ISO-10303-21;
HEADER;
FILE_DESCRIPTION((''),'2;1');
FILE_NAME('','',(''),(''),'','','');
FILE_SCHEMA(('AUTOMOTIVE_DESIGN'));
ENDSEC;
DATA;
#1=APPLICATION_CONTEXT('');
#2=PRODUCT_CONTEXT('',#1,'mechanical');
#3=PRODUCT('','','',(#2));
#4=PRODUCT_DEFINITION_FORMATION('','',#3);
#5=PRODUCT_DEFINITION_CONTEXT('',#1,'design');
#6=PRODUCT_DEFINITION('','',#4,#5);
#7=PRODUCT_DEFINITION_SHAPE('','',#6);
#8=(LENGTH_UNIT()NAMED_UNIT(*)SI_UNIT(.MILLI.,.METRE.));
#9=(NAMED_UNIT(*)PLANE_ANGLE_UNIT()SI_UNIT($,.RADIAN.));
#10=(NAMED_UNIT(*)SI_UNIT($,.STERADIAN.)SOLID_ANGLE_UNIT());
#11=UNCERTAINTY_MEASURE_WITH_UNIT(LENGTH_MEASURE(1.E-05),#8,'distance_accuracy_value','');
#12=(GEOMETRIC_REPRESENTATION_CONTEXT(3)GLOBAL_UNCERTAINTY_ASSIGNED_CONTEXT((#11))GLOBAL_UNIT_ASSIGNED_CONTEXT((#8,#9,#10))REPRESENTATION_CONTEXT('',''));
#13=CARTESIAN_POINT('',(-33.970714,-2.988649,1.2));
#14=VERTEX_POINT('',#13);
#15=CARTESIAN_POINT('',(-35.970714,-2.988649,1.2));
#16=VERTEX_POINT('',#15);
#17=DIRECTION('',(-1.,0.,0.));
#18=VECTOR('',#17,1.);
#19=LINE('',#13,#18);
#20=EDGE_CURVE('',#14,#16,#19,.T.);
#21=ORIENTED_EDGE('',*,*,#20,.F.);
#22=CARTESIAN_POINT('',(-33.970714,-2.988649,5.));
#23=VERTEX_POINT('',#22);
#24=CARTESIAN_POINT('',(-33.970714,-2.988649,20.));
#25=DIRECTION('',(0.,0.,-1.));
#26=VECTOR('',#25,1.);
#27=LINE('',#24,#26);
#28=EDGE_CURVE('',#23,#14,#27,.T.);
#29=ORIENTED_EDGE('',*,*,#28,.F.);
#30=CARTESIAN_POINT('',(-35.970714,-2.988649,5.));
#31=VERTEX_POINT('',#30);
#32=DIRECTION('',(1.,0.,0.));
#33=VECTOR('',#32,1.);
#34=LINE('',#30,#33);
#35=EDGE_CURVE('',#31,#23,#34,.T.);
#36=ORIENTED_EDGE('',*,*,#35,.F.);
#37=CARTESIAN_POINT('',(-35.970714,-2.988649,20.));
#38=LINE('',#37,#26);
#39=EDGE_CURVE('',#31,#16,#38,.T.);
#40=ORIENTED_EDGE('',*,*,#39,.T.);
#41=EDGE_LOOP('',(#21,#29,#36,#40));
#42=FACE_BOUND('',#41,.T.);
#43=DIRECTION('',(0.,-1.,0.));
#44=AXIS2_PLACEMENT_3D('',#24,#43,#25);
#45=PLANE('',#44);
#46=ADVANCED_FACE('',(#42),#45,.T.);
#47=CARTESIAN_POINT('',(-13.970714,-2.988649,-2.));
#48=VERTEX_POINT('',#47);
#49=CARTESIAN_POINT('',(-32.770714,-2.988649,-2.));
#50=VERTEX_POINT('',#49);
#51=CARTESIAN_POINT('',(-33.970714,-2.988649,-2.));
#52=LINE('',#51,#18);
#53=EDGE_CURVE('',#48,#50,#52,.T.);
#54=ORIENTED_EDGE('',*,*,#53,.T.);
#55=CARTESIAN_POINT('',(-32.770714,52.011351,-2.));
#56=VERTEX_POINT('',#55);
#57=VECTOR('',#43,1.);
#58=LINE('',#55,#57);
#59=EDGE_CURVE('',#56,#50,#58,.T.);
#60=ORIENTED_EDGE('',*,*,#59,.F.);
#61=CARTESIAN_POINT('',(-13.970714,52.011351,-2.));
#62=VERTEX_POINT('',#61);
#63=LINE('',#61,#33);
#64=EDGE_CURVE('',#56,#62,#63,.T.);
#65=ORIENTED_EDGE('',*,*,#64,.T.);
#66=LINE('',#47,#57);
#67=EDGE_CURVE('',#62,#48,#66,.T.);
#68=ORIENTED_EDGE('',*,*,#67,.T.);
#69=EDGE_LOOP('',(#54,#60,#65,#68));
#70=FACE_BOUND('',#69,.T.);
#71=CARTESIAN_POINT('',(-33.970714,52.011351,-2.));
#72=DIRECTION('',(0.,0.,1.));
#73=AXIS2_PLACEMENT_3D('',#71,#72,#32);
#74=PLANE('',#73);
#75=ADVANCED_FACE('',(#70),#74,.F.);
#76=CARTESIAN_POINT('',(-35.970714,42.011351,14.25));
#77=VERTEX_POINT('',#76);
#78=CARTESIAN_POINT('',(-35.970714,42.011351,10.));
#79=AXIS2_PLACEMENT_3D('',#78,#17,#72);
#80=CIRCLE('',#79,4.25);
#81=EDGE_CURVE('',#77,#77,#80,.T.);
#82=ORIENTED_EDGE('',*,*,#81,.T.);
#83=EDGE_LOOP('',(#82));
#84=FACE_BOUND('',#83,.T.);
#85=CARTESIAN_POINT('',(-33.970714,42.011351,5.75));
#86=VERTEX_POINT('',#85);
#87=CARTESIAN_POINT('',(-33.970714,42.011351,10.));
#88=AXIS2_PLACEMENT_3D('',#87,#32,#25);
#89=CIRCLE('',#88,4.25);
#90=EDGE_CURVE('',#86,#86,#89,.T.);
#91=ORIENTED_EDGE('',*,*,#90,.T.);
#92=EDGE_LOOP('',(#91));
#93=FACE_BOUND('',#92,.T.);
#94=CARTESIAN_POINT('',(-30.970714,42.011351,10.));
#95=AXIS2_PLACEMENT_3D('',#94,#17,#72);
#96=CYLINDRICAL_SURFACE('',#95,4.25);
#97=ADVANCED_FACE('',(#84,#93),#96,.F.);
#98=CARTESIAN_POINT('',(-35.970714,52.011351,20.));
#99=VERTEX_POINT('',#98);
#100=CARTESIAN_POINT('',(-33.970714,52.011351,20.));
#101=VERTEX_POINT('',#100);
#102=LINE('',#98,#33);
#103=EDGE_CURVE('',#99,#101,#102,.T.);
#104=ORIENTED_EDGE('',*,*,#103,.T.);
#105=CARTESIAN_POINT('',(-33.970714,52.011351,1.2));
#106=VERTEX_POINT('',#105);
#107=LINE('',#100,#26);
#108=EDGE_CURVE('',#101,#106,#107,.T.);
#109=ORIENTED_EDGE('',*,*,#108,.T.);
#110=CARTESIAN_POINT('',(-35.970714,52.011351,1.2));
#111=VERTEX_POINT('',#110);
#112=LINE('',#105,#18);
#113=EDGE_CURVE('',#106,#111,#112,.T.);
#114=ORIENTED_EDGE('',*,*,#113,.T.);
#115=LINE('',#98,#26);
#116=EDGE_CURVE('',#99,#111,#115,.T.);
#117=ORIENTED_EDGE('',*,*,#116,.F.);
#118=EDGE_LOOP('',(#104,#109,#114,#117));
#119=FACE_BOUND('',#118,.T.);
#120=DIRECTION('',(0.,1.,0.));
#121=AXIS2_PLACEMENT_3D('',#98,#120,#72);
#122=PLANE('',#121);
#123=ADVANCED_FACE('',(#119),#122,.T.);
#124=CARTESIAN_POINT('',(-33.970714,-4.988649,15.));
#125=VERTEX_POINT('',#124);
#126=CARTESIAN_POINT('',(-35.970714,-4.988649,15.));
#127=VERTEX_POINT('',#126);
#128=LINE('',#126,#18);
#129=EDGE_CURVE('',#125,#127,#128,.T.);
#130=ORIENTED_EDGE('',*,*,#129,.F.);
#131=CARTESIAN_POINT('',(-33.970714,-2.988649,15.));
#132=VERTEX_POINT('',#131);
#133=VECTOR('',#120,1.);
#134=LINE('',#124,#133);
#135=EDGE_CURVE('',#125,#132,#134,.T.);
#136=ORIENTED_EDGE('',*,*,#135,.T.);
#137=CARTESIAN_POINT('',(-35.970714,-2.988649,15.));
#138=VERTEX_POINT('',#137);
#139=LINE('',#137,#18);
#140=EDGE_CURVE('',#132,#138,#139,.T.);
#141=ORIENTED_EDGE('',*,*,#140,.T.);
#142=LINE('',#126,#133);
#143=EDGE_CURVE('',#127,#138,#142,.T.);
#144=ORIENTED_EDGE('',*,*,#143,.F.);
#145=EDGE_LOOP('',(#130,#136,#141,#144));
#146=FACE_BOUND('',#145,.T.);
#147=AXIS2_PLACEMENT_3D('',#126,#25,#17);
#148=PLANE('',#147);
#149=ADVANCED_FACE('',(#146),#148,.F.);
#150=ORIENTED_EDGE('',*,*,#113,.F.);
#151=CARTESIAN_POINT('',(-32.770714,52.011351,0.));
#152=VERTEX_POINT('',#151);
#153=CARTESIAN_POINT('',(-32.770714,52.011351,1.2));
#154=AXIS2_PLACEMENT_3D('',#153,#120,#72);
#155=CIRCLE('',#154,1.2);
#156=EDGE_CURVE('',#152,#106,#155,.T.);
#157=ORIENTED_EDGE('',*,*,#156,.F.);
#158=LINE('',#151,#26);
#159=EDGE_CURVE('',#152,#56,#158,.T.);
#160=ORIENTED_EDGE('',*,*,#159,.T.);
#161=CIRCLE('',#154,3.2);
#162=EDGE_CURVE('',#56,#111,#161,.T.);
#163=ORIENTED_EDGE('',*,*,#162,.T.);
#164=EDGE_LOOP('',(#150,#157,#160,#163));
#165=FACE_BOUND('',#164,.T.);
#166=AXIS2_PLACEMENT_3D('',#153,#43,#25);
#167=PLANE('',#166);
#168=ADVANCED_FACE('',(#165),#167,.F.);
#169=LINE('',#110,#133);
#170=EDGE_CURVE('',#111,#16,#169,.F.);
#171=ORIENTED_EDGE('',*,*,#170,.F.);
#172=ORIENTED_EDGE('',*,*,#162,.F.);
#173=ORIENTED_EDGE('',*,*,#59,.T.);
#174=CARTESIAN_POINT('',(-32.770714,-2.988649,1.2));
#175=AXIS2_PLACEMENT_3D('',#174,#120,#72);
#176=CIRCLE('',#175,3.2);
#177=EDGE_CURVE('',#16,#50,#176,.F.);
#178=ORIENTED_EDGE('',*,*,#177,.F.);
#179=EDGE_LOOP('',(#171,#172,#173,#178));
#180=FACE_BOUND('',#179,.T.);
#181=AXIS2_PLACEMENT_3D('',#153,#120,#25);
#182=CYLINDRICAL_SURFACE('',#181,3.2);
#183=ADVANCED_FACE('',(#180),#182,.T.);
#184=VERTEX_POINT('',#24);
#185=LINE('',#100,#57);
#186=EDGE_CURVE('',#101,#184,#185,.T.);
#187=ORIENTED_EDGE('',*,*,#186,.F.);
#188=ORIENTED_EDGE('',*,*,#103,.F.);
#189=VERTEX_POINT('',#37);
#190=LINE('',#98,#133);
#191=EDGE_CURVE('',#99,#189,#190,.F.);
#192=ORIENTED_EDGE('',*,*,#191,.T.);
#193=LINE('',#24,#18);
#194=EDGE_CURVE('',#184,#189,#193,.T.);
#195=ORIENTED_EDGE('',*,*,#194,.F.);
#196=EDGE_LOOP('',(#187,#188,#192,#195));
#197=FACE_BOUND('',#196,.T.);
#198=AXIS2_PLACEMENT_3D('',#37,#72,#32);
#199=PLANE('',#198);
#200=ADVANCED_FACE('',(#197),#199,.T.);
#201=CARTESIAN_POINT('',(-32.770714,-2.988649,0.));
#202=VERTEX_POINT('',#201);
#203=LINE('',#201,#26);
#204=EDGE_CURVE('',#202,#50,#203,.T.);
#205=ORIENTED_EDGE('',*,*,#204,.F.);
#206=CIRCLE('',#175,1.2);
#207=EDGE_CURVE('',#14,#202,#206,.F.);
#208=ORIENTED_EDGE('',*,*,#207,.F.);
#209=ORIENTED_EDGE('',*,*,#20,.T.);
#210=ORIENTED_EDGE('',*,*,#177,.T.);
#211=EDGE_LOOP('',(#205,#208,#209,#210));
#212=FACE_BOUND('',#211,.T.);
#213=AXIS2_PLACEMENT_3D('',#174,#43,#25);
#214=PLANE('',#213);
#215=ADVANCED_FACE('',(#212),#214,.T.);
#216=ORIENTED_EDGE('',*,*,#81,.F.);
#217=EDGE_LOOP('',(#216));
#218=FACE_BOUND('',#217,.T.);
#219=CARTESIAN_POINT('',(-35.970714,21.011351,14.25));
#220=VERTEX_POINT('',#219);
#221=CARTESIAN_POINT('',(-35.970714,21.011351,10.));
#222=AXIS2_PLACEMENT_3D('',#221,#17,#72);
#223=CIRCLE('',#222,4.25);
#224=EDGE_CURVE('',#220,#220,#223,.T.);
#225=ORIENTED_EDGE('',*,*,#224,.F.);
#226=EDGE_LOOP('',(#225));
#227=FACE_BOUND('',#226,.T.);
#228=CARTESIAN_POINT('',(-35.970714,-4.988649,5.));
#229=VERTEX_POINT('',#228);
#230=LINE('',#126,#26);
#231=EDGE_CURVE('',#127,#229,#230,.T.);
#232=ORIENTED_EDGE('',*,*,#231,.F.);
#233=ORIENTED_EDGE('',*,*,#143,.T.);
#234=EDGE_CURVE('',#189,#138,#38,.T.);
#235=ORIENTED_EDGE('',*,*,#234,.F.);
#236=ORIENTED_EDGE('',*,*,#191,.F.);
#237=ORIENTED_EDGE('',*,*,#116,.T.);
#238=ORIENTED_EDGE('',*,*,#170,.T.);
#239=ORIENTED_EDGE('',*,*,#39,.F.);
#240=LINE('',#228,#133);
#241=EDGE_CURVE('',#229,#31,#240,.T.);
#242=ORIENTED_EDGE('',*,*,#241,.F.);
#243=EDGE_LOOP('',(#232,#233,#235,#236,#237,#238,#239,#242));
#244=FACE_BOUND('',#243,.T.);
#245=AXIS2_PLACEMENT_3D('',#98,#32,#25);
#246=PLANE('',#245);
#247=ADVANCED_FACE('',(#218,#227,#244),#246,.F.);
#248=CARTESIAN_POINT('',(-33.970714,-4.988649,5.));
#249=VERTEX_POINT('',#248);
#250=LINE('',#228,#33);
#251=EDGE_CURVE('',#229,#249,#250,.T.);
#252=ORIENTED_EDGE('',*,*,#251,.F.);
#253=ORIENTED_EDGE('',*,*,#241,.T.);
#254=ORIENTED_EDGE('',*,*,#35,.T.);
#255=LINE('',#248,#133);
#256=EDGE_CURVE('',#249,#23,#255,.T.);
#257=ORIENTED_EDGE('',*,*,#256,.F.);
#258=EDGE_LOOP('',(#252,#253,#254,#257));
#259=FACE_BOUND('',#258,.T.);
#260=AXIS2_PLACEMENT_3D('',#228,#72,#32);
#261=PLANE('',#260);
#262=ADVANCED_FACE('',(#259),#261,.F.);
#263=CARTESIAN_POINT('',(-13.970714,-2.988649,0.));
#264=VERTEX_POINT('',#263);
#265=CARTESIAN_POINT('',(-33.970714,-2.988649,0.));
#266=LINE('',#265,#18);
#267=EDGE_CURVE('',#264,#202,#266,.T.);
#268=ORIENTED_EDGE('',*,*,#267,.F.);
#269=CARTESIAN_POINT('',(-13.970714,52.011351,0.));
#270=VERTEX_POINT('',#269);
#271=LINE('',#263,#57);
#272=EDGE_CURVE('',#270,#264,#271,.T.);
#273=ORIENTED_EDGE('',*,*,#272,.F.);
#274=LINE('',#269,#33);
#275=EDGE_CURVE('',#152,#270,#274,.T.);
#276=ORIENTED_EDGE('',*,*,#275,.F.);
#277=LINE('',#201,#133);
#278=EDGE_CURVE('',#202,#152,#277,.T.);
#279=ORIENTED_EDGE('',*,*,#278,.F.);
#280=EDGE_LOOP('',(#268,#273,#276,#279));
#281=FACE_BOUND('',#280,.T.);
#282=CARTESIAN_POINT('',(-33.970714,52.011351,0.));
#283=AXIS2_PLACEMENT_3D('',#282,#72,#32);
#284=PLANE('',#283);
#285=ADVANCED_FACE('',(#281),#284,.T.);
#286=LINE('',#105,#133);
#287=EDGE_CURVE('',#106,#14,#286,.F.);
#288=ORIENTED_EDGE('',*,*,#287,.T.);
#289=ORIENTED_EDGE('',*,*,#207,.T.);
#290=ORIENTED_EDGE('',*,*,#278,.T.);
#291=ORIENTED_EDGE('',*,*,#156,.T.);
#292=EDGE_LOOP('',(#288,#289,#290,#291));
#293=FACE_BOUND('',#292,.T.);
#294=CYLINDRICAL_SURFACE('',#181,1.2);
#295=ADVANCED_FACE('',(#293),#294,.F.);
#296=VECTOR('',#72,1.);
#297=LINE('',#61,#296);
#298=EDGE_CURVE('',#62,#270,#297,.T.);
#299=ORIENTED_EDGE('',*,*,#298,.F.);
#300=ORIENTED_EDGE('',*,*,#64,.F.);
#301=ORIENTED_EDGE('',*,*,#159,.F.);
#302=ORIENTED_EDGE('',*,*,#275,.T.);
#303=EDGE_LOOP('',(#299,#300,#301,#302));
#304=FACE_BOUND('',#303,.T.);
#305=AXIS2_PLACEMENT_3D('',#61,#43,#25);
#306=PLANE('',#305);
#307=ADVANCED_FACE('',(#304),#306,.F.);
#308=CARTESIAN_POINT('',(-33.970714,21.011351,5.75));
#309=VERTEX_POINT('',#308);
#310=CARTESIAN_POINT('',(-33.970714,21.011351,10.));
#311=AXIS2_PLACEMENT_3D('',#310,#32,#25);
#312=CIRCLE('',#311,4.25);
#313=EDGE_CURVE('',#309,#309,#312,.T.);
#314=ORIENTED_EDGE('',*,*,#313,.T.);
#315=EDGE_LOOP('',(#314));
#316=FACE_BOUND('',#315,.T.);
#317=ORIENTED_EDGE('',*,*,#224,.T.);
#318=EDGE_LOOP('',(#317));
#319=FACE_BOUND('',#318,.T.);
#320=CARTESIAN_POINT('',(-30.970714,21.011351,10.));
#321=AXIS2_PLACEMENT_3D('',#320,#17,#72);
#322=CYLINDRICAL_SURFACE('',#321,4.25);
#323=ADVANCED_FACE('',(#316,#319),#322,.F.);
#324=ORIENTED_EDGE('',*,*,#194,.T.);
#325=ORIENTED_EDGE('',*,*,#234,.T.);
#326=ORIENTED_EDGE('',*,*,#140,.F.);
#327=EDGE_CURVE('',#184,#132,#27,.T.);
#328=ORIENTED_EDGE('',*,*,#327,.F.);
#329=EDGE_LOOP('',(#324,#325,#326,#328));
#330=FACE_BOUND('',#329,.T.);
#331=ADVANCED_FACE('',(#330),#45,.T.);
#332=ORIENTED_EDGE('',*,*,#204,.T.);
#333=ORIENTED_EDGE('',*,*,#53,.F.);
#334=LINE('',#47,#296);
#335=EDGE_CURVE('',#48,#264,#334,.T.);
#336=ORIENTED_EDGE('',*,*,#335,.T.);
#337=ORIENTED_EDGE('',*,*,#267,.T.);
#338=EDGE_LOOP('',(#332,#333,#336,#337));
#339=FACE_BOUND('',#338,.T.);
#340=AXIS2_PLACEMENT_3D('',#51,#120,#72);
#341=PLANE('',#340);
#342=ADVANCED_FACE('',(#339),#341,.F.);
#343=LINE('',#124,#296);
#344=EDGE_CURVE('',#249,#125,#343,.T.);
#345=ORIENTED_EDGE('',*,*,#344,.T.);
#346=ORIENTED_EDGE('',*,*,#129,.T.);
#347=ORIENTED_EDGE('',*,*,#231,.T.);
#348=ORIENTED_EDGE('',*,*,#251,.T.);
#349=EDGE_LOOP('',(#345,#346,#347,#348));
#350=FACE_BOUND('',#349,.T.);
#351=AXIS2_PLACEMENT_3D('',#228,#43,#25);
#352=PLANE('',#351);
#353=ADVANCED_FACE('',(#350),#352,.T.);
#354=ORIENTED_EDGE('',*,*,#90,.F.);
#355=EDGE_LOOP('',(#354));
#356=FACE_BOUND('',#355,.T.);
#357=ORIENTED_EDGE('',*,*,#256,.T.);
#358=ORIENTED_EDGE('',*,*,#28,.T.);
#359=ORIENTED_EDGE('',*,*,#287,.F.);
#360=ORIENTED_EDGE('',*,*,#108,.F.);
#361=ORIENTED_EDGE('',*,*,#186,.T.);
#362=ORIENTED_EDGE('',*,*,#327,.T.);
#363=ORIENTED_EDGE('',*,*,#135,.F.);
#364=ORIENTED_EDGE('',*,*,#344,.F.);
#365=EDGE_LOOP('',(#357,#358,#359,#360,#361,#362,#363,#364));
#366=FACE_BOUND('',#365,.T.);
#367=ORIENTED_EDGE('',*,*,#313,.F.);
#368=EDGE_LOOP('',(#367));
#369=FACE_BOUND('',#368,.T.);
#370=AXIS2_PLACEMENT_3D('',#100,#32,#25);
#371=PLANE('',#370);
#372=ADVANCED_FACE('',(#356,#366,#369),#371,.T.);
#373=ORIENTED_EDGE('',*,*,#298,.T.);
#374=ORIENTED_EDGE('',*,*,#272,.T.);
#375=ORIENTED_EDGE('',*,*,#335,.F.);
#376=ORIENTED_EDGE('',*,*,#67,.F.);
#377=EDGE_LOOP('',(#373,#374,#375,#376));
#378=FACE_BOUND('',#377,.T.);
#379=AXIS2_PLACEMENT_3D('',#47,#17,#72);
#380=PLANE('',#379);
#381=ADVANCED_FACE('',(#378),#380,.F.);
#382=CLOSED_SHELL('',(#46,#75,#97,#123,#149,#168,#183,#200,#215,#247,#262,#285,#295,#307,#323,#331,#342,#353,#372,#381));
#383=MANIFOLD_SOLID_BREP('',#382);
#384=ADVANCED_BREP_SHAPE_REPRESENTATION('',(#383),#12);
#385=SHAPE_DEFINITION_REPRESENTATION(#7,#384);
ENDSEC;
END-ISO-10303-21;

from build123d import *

# Parameters (mm, degrees)
SKETCH_1_W                       = 2
SKETCH_1_H                       = 55
SM_BASE_FLANGE_1_DEPTH           = 20
SM_EDGE_FLANGE_1_STRIP_W         = 10.4
SM_EDGE_FLANGE_1_STRIP_H         = 2
SM_EDGE_FLANGE_1_STRIP_CUT_DEPTH = 55
SM_EDGE_FLANGE_1_DEPTH           = 55
SKETCH_6_W                       = 2
SKETCH_6_H                       = 10
EXTRUDE_1_DEPTH                  = 2
SKETCH_8_R                       = 4.25
CUT_EXTRUDE_2_DEPTH              = 5


# Sheet-metal steps are written as plain solids
with BuildPart() as part:
    # Sketch 1 → Базовая кромка1 (new body)
    with BuildSketch(Plane.XY):
        with Locations((-34.970714213, 24.511351052)):
            Rectangle(SKETCH_1_W, SKETCH_1_H)
    extrude(amount=SM_BASE_FLANGE_1_DEPTH)

    # Ребро-кромка1 strip (across the edge) → Ребро-кромка1 strip cut (cut)
    with BuildSketch(Plane(origin=(-33.970714213, -2.988648948, 0), x_dir=(0, 0, 1), z_dir=(0, 1, 0))):
        with Locations((-4, -1)):
            Rectangle(SM_EDGE_FLANGE_1_STRIP_W, SM_EDGE_FLANGE_1_STRIP_H)
    extrude(amount=SM_EDGE_FLANGE_1_STRIP_CUT_DEPTH, mode=Mode.SUBTRACT)

    # Ребро-кромка1 section (across the edge) → Ребро-кромка1 (add)
    with BuildSketch(Plane(origin=(-33.970714213, -2.988648948, 0), x_dir=(0, 0, 1), z_dir=(0, 1, 0))):
        with BuildLine():
            Line((-2, 1.2), (-2, 20))
            Line((-2, 20), (0, 20))
            Line((0, 20), (0, 1.2))
            ThreePointArc((0, 1.2), (0.351471863, 0.351471863), (1.2, 0))
            Line((1.2, 0), (1.2, -2))
            ThreePointArc((1.2, -2), (-1.0627417, -1.0627417), (-2, 1.2))
        make_face()
    extrude(amount=SM_EDGE_FLANGE_1_DEPTH)

    # Эскиз6 → Бобышка-Вытянуть1 (add)
    with BuildSketch(Plane.XZ.offset(2.988648948)):
        with Locations((-34.970714213, 10)):
            Rectangle(SKETCH_6_W, SKETCH_6_H)
    extrude(amount=EXTRUDE_1_DEPTH)

    # Эскиз8 → Вырез-Вытянуть2 (cut)
    with BuildSketch(Plane.ZY.offset(35.970714213)):
        with Locations((10, 42.011351052)):
            Circle(SKETCH_8_R)
        with Locations((10, 21.011351052)):
            Circle(SKETCH_8_R)
    extrude(amount=-CUT_EXTRUDE_2_DEPTH, mode=Mode.SUBTRACT)


solid = part.part
